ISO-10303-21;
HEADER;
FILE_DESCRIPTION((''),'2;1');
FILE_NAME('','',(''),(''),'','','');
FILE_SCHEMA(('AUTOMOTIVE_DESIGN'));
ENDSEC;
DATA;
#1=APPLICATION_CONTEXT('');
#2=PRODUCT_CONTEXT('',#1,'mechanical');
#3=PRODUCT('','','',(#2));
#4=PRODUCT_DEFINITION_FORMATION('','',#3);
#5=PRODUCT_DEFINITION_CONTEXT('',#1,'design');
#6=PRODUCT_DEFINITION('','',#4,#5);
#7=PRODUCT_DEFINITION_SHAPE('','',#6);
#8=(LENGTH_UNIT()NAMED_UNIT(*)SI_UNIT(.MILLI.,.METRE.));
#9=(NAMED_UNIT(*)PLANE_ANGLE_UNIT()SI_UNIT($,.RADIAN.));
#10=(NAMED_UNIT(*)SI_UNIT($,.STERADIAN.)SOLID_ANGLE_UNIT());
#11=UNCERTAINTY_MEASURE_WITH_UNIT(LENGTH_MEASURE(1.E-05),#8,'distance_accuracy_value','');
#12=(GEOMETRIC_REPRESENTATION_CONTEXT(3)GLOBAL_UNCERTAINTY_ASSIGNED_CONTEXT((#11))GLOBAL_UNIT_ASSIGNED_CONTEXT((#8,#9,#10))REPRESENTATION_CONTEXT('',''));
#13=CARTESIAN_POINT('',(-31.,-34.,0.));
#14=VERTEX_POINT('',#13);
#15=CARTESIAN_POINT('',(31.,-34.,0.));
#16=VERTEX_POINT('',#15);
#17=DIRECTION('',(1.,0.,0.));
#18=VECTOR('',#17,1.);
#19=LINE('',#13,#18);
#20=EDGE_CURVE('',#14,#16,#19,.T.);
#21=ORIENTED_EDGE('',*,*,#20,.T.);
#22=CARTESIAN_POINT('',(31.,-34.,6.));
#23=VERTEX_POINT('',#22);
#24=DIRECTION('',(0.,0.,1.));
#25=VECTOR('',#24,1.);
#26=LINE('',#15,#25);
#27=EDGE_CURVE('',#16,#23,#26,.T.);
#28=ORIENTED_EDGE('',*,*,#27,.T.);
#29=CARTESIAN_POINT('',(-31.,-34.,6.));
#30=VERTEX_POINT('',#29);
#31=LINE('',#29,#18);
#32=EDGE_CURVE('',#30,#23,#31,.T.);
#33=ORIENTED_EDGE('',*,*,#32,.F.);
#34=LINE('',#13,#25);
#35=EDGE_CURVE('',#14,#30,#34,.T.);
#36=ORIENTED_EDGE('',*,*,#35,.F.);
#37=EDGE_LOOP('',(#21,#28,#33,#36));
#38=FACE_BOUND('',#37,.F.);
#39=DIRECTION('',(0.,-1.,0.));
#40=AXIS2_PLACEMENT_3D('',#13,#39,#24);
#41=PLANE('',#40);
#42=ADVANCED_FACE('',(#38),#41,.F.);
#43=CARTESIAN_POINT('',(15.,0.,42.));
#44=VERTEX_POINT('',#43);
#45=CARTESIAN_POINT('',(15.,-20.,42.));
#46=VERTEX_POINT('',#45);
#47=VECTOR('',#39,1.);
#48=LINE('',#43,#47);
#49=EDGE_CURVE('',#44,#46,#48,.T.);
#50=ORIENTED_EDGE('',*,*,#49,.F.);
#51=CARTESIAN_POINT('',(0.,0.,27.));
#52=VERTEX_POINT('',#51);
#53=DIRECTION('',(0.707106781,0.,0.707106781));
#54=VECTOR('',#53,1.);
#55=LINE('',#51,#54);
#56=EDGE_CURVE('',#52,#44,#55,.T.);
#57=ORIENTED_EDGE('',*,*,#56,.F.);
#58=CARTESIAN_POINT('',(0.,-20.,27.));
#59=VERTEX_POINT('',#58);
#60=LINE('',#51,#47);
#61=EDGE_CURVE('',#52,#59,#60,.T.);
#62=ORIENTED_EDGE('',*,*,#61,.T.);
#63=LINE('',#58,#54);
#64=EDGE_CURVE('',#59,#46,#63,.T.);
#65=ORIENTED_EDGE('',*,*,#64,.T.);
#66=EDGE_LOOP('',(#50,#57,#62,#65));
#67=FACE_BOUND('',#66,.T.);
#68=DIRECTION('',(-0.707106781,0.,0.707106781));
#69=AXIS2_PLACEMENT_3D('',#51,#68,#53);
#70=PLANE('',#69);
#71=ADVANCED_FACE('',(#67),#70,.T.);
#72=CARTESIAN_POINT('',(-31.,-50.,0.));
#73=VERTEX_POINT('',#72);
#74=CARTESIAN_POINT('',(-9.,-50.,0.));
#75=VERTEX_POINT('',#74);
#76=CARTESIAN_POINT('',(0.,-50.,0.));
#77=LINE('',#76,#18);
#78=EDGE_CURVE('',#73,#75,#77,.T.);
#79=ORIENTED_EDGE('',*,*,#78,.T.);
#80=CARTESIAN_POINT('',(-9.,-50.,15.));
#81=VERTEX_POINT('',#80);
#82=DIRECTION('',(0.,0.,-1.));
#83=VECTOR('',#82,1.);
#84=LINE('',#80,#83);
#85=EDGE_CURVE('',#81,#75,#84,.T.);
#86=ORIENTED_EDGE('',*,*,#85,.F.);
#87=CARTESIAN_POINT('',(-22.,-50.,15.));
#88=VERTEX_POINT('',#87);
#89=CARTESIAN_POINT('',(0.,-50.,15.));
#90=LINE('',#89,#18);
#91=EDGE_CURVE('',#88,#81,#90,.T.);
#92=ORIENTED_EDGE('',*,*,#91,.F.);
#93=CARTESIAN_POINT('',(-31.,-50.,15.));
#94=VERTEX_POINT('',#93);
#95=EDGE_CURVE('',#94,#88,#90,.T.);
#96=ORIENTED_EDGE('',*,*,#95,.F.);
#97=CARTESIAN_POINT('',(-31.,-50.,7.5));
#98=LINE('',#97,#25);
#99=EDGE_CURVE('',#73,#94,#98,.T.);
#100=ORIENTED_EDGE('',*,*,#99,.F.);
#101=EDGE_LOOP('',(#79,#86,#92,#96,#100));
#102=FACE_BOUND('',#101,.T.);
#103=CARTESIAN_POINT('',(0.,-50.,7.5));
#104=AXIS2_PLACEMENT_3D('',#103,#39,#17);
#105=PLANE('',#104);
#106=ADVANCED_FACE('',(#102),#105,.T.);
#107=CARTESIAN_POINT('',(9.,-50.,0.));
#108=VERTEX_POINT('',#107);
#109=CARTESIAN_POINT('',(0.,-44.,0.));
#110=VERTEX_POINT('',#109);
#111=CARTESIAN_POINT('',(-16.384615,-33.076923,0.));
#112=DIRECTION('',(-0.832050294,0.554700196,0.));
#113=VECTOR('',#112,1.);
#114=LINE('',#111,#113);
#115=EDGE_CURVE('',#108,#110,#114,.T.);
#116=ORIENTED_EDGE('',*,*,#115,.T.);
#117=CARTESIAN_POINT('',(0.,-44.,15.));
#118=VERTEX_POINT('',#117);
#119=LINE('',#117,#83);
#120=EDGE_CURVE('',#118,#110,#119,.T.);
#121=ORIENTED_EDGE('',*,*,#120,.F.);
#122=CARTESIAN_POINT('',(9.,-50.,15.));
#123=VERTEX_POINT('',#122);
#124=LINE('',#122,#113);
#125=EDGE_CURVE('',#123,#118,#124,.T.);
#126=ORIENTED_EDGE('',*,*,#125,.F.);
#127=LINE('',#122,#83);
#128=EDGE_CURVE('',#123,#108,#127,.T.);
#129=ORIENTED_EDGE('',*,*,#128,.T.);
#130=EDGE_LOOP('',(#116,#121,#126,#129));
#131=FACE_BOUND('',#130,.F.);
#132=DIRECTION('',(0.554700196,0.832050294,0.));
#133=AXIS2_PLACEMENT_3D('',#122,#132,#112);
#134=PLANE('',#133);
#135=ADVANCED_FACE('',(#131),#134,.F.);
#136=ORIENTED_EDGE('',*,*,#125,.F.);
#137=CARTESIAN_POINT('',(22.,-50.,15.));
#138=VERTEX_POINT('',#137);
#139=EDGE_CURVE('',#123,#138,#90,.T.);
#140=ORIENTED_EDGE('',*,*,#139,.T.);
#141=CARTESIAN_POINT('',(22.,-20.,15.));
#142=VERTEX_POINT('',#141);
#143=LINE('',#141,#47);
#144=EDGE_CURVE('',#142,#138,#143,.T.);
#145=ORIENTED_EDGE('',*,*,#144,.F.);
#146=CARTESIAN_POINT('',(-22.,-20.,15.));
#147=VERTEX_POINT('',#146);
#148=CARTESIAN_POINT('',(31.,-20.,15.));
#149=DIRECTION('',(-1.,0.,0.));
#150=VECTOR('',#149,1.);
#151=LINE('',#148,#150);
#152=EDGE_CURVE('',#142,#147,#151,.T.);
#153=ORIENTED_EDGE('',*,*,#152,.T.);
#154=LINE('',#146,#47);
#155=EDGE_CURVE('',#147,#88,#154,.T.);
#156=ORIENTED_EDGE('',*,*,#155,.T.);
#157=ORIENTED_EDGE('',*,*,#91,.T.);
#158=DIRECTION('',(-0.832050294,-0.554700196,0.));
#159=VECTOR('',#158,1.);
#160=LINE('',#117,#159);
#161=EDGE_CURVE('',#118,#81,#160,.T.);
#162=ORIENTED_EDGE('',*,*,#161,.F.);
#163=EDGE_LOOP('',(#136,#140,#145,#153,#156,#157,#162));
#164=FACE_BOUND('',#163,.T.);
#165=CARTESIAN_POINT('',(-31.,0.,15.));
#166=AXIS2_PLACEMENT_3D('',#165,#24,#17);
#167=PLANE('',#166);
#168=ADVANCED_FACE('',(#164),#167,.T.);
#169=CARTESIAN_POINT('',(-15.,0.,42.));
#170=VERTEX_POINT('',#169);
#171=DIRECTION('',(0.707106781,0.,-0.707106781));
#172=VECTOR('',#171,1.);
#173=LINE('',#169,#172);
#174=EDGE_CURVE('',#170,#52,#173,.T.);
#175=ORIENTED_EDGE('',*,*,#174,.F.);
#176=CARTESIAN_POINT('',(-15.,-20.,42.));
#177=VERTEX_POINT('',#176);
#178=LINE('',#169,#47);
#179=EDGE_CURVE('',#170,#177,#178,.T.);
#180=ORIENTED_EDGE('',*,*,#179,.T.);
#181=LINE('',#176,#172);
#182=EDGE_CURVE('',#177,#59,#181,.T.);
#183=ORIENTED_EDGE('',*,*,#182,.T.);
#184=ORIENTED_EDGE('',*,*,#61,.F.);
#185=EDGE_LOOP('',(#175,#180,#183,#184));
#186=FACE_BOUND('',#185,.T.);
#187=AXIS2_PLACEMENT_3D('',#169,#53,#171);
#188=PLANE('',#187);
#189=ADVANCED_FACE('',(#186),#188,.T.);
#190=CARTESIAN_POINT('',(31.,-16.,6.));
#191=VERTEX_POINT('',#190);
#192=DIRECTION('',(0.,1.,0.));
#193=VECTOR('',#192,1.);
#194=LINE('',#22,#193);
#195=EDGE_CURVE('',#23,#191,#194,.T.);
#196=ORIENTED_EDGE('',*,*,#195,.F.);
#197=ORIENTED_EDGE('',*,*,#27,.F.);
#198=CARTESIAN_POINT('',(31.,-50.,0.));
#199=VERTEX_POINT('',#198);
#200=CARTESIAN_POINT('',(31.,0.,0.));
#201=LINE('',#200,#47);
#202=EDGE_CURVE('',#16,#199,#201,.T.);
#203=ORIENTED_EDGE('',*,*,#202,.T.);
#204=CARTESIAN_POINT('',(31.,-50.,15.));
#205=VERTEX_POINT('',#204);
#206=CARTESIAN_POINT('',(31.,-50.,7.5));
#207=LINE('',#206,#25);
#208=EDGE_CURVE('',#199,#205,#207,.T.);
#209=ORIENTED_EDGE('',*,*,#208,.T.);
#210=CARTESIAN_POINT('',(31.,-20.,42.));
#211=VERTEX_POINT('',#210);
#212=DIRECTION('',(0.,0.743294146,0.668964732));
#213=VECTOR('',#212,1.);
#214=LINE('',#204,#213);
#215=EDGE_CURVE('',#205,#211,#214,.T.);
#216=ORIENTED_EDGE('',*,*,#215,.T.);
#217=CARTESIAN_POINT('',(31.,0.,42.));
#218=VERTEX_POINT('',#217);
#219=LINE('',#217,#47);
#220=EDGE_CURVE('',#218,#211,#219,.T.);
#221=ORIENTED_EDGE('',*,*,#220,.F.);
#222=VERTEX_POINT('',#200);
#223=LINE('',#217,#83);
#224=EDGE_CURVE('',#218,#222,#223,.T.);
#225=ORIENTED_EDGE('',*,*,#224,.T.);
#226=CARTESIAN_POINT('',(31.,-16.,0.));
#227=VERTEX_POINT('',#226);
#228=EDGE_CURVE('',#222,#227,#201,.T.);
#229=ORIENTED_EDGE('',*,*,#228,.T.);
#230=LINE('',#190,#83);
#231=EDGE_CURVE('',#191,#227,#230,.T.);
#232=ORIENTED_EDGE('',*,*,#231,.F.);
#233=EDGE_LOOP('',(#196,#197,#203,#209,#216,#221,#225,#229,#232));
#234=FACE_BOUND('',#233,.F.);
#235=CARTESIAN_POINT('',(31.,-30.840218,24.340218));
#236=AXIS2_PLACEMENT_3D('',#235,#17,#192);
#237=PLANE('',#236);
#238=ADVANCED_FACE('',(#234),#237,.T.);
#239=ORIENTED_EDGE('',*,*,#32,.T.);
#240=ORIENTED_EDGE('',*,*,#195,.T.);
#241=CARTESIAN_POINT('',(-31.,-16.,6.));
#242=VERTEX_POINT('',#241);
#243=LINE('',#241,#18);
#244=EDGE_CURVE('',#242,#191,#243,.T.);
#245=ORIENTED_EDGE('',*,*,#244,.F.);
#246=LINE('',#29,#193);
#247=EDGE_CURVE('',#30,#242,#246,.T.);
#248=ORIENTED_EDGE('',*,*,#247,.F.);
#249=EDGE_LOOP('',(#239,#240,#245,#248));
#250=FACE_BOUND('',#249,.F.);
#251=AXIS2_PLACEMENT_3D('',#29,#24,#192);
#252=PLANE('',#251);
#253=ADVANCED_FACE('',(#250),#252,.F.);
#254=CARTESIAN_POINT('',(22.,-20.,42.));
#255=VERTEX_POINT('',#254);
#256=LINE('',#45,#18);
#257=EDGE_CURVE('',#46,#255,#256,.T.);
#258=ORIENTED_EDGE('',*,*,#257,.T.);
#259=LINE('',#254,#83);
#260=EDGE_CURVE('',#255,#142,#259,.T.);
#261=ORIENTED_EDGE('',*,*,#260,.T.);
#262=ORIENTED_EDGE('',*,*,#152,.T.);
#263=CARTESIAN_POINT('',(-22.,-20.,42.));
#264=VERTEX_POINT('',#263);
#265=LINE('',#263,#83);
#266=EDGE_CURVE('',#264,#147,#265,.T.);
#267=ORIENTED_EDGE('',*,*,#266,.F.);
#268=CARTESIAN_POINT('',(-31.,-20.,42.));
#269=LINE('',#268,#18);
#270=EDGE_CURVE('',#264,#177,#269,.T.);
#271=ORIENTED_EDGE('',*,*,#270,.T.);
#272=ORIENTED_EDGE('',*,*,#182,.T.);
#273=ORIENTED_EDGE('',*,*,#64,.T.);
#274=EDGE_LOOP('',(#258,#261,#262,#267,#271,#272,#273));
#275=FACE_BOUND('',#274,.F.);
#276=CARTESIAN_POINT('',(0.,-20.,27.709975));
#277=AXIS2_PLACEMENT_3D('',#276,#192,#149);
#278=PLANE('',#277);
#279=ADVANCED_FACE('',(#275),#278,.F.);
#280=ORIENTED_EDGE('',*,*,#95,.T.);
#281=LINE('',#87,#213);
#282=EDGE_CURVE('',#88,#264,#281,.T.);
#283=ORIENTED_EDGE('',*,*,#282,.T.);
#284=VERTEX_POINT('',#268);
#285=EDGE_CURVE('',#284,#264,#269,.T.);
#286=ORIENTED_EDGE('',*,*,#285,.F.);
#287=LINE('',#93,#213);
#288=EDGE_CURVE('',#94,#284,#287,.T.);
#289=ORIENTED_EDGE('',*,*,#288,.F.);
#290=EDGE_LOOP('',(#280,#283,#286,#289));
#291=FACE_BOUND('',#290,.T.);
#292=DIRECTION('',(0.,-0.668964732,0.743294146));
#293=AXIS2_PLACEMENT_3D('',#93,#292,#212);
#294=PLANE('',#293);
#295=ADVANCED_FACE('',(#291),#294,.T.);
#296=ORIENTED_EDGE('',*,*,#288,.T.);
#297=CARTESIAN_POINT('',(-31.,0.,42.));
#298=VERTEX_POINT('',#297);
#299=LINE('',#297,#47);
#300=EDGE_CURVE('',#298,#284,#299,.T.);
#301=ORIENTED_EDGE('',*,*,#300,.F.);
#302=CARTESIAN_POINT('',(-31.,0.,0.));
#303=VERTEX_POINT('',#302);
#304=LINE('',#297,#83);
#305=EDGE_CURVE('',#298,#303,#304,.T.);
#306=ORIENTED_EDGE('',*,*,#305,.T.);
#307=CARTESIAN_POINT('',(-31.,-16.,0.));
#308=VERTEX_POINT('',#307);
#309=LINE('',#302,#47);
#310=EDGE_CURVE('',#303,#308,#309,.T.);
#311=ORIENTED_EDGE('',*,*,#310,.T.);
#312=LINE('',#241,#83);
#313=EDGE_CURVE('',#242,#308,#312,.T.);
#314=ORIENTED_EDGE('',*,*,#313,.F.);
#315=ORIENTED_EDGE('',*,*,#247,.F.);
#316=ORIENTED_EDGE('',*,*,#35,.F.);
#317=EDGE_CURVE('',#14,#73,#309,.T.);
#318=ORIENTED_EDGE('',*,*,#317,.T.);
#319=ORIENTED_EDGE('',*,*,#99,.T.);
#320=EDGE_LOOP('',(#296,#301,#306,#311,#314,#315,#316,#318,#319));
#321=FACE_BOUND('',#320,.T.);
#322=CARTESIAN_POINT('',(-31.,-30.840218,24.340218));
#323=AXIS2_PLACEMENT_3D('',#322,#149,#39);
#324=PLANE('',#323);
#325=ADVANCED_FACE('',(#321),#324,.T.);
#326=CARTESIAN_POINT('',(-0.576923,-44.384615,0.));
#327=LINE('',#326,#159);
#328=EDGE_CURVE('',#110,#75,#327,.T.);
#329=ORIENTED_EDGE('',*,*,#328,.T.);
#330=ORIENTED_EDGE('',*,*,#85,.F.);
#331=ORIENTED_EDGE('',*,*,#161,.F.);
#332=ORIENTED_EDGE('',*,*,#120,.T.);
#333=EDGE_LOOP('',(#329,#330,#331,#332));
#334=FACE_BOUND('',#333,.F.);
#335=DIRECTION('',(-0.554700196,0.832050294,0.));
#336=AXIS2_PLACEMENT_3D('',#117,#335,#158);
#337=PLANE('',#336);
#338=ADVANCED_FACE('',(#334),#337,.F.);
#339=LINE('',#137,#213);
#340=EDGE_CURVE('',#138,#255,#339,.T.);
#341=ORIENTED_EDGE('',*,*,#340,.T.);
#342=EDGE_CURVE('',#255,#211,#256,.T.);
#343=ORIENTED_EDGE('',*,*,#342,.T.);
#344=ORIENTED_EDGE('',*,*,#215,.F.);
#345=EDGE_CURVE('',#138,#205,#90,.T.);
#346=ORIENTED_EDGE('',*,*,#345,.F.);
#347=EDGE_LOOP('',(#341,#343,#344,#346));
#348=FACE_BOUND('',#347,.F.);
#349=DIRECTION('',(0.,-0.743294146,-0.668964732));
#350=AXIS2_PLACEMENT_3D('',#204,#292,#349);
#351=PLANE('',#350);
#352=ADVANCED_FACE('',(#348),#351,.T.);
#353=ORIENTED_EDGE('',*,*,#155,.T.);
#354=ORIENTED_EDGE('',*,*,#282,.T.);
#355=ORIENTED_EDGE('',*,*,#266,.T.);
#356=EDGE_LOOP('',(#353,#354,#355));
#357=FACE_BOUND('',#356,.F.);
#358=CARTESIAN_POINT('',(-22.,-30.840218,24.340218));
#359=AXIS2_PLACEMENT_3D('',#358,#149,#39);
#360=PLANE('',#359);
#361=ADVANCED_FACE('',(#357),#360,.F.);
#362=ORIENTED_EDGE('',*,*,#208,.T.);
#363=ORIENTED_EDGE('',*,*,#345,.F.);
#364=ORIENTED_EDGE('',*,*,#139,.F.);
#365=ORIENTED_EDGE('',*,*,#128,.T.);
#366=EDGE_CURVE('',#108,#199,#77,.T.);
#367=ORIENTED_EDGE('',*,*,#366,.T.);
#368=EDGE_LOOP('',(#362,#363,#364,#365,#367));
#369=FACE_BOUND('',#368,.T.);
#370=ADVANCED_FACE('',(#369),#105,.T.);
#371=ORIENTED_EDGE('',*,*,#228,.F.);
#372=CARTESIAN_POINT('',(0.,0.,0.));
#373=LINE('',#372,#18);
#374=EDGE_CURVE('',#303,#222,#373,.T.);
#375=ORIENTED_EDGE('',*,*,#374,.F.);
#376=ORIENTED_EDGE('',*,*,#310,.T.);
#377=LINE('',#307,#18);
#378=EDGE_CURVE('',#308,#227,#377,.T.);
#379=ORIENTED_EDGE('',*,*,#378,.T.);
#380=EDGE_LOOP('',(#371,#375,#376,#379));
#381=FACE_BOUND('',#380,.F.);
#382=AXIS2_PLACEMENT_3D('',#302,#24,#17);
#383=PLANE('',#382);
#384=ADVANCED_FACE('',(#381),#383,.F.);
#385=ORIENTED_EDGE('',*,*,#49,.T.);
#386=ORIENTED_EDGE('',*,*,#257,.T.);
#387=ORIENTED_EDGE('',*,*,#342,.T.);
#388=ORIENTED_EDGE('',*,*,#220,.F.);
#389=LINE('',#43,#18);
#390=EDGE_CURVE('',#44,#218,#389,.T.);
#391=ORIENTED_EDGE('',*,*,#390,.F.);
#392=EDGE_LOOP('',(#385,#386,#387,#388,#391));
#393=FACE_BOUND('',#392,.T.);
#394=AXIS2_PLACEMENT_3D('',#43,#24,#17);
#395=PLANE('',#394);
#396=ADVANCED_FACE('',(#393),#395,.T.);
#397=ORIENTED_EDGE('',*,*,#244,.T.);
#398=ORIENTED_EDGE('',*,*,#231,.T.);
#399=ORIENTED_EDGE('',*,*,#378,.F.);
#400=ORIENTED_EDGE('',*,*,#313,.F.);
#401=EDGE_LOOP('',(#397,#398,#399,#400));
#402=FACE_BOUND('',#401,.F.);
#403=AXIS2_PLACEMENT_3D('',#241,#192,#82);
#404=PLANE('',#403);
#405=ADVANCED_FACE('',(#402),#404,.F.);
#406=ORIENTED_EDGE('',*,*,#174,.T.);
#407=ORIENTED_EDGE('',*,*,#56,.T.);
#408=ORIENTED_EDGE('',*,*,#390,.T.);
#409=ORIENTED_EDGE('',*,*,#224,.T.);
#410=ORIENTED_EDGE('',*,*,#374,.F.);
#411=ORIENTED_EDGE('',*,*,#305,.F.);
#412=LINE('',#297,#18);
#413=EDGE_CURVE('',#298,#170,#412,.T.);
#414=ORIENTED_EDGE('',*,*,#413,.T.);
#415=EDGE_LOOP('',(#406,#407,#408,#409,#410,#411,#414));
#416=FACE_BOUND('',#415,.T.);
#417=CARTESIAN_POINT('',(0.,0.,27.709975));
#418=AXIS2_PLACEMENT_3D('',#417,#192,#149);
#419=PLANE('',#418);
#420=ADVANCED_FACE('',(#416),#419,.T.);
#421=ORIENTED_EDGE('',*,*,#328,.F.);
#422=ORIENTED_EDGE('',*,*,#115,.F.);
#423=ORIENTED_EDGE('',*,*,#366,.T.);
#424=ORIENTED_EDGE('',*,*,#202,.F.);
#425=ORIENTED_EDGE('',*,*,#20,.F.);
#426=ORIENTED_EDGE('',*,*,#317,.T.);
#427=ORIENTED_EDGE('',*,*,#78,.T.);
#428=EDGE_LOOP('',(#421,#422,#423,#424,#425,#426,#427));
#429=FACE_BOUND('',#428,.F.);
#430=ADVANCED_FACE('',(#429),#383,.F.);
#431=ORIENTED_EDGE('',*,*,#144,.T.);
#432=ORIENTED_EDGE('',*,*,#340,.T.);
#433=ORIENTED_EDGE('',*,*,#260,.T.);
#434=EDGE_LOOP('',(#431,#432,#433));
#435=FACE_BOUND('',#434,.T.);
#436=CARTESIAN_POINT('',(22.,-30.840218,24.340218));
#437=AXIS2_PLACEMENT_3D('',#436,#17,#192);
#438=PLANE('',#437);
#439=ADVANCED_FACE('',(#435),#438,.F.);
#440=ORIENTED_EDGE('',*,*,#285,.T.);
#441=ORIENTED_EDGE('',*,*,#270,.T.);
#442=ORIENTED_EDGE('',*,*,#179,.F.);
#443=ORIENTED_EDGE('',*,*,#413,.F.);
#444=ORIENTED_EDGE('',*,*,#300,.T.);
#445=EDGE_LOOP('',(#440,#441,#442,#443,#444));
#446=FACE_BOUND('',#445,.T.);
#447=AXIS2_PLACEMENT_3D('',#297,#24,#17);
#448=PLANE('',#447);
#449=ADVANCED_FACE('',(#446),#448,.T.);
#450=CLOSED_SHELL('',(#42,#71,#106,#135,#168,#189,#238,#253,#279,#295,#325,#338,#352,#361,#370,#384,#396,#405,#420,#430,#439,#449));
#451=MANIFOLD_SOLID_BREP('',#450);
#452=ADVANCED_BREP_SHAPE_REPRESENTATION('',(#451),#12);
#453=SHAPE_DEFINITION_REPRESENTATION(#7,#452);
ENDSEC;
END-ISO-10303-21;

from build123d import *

# Parameters (mm, degrees)
F0_W      = 62
F0_H      = 15
F1_DEPTH  = 50
F3_DEPTH  = 20
F7_DEPTH  = 62
F8_DEPTH  = 9
F10_DEPTH = 25


# Not quite as in the source:
# - a pattern or mirror of a feature is missing from the dataset's text; its kind, count and spacing are read off the source's solid


with BuildPart() as f1:
    # F0 (on Front) → F1 (new body)
    with BuildSketch(Plane.XZ):
        with Locations((0, 7.5)):
            Rectangle(F0_W, F0_H)
    extrude(amount=F1_DEPTH)

    # F2 (on face) → F3 (join)
    with BuildSketch(Plane(origin=(0, 0, 0), x_dir=(-1, 0, 0), z_dir=(0, 1, 0))):
        Polygon((-31, 15), (31, 15), (31, 42), (15, 42), (0, 27), (-15, 42), (-31, 42), align=None)
    extrude(amount=-F3_DEPTH)

    # F5 (on face) → F7 (cut)
    with BuildSketch(Plane(origin=(-31, 0, 0), x_dir=(0, -1, 0), z_dir=(-1, 0, 0))):
        Polygon((16, 6), (16, 0), (25, 0), (34, 0), (34, 6), align=None)
    extrude(amount=-F7_DEPTH, mode=Mode.SUBTRACT)

    # F6 (on face) → F8 (join)
    with BuildSketch(Plane(origin=(-31, 0, 0), x_dir=(0, -1, 0), z_dir=(-1, 0, 0))):
        Polygon((50, 15), (20, 42), (20, 15), align=None)
    f8 = extrude(amount=-F8_DEPTH)

    # F8_copies: F8 across plane
    add(f8.mirror(Plane(origin=(0, 0, 0), x_dir=(0, 0, 1), z_dir=(1, 0, 0))))

    # F9 (on face) → F10 (cut)
    with BuildSketch(Plane.XY.offset(15)):
        Polygon((0, -44), (-9, -50), (9, -50), align=None)
    extrude(amount=-F10_DEPTH, mode=Mode.SUBTRACT)


solid = f1.part
